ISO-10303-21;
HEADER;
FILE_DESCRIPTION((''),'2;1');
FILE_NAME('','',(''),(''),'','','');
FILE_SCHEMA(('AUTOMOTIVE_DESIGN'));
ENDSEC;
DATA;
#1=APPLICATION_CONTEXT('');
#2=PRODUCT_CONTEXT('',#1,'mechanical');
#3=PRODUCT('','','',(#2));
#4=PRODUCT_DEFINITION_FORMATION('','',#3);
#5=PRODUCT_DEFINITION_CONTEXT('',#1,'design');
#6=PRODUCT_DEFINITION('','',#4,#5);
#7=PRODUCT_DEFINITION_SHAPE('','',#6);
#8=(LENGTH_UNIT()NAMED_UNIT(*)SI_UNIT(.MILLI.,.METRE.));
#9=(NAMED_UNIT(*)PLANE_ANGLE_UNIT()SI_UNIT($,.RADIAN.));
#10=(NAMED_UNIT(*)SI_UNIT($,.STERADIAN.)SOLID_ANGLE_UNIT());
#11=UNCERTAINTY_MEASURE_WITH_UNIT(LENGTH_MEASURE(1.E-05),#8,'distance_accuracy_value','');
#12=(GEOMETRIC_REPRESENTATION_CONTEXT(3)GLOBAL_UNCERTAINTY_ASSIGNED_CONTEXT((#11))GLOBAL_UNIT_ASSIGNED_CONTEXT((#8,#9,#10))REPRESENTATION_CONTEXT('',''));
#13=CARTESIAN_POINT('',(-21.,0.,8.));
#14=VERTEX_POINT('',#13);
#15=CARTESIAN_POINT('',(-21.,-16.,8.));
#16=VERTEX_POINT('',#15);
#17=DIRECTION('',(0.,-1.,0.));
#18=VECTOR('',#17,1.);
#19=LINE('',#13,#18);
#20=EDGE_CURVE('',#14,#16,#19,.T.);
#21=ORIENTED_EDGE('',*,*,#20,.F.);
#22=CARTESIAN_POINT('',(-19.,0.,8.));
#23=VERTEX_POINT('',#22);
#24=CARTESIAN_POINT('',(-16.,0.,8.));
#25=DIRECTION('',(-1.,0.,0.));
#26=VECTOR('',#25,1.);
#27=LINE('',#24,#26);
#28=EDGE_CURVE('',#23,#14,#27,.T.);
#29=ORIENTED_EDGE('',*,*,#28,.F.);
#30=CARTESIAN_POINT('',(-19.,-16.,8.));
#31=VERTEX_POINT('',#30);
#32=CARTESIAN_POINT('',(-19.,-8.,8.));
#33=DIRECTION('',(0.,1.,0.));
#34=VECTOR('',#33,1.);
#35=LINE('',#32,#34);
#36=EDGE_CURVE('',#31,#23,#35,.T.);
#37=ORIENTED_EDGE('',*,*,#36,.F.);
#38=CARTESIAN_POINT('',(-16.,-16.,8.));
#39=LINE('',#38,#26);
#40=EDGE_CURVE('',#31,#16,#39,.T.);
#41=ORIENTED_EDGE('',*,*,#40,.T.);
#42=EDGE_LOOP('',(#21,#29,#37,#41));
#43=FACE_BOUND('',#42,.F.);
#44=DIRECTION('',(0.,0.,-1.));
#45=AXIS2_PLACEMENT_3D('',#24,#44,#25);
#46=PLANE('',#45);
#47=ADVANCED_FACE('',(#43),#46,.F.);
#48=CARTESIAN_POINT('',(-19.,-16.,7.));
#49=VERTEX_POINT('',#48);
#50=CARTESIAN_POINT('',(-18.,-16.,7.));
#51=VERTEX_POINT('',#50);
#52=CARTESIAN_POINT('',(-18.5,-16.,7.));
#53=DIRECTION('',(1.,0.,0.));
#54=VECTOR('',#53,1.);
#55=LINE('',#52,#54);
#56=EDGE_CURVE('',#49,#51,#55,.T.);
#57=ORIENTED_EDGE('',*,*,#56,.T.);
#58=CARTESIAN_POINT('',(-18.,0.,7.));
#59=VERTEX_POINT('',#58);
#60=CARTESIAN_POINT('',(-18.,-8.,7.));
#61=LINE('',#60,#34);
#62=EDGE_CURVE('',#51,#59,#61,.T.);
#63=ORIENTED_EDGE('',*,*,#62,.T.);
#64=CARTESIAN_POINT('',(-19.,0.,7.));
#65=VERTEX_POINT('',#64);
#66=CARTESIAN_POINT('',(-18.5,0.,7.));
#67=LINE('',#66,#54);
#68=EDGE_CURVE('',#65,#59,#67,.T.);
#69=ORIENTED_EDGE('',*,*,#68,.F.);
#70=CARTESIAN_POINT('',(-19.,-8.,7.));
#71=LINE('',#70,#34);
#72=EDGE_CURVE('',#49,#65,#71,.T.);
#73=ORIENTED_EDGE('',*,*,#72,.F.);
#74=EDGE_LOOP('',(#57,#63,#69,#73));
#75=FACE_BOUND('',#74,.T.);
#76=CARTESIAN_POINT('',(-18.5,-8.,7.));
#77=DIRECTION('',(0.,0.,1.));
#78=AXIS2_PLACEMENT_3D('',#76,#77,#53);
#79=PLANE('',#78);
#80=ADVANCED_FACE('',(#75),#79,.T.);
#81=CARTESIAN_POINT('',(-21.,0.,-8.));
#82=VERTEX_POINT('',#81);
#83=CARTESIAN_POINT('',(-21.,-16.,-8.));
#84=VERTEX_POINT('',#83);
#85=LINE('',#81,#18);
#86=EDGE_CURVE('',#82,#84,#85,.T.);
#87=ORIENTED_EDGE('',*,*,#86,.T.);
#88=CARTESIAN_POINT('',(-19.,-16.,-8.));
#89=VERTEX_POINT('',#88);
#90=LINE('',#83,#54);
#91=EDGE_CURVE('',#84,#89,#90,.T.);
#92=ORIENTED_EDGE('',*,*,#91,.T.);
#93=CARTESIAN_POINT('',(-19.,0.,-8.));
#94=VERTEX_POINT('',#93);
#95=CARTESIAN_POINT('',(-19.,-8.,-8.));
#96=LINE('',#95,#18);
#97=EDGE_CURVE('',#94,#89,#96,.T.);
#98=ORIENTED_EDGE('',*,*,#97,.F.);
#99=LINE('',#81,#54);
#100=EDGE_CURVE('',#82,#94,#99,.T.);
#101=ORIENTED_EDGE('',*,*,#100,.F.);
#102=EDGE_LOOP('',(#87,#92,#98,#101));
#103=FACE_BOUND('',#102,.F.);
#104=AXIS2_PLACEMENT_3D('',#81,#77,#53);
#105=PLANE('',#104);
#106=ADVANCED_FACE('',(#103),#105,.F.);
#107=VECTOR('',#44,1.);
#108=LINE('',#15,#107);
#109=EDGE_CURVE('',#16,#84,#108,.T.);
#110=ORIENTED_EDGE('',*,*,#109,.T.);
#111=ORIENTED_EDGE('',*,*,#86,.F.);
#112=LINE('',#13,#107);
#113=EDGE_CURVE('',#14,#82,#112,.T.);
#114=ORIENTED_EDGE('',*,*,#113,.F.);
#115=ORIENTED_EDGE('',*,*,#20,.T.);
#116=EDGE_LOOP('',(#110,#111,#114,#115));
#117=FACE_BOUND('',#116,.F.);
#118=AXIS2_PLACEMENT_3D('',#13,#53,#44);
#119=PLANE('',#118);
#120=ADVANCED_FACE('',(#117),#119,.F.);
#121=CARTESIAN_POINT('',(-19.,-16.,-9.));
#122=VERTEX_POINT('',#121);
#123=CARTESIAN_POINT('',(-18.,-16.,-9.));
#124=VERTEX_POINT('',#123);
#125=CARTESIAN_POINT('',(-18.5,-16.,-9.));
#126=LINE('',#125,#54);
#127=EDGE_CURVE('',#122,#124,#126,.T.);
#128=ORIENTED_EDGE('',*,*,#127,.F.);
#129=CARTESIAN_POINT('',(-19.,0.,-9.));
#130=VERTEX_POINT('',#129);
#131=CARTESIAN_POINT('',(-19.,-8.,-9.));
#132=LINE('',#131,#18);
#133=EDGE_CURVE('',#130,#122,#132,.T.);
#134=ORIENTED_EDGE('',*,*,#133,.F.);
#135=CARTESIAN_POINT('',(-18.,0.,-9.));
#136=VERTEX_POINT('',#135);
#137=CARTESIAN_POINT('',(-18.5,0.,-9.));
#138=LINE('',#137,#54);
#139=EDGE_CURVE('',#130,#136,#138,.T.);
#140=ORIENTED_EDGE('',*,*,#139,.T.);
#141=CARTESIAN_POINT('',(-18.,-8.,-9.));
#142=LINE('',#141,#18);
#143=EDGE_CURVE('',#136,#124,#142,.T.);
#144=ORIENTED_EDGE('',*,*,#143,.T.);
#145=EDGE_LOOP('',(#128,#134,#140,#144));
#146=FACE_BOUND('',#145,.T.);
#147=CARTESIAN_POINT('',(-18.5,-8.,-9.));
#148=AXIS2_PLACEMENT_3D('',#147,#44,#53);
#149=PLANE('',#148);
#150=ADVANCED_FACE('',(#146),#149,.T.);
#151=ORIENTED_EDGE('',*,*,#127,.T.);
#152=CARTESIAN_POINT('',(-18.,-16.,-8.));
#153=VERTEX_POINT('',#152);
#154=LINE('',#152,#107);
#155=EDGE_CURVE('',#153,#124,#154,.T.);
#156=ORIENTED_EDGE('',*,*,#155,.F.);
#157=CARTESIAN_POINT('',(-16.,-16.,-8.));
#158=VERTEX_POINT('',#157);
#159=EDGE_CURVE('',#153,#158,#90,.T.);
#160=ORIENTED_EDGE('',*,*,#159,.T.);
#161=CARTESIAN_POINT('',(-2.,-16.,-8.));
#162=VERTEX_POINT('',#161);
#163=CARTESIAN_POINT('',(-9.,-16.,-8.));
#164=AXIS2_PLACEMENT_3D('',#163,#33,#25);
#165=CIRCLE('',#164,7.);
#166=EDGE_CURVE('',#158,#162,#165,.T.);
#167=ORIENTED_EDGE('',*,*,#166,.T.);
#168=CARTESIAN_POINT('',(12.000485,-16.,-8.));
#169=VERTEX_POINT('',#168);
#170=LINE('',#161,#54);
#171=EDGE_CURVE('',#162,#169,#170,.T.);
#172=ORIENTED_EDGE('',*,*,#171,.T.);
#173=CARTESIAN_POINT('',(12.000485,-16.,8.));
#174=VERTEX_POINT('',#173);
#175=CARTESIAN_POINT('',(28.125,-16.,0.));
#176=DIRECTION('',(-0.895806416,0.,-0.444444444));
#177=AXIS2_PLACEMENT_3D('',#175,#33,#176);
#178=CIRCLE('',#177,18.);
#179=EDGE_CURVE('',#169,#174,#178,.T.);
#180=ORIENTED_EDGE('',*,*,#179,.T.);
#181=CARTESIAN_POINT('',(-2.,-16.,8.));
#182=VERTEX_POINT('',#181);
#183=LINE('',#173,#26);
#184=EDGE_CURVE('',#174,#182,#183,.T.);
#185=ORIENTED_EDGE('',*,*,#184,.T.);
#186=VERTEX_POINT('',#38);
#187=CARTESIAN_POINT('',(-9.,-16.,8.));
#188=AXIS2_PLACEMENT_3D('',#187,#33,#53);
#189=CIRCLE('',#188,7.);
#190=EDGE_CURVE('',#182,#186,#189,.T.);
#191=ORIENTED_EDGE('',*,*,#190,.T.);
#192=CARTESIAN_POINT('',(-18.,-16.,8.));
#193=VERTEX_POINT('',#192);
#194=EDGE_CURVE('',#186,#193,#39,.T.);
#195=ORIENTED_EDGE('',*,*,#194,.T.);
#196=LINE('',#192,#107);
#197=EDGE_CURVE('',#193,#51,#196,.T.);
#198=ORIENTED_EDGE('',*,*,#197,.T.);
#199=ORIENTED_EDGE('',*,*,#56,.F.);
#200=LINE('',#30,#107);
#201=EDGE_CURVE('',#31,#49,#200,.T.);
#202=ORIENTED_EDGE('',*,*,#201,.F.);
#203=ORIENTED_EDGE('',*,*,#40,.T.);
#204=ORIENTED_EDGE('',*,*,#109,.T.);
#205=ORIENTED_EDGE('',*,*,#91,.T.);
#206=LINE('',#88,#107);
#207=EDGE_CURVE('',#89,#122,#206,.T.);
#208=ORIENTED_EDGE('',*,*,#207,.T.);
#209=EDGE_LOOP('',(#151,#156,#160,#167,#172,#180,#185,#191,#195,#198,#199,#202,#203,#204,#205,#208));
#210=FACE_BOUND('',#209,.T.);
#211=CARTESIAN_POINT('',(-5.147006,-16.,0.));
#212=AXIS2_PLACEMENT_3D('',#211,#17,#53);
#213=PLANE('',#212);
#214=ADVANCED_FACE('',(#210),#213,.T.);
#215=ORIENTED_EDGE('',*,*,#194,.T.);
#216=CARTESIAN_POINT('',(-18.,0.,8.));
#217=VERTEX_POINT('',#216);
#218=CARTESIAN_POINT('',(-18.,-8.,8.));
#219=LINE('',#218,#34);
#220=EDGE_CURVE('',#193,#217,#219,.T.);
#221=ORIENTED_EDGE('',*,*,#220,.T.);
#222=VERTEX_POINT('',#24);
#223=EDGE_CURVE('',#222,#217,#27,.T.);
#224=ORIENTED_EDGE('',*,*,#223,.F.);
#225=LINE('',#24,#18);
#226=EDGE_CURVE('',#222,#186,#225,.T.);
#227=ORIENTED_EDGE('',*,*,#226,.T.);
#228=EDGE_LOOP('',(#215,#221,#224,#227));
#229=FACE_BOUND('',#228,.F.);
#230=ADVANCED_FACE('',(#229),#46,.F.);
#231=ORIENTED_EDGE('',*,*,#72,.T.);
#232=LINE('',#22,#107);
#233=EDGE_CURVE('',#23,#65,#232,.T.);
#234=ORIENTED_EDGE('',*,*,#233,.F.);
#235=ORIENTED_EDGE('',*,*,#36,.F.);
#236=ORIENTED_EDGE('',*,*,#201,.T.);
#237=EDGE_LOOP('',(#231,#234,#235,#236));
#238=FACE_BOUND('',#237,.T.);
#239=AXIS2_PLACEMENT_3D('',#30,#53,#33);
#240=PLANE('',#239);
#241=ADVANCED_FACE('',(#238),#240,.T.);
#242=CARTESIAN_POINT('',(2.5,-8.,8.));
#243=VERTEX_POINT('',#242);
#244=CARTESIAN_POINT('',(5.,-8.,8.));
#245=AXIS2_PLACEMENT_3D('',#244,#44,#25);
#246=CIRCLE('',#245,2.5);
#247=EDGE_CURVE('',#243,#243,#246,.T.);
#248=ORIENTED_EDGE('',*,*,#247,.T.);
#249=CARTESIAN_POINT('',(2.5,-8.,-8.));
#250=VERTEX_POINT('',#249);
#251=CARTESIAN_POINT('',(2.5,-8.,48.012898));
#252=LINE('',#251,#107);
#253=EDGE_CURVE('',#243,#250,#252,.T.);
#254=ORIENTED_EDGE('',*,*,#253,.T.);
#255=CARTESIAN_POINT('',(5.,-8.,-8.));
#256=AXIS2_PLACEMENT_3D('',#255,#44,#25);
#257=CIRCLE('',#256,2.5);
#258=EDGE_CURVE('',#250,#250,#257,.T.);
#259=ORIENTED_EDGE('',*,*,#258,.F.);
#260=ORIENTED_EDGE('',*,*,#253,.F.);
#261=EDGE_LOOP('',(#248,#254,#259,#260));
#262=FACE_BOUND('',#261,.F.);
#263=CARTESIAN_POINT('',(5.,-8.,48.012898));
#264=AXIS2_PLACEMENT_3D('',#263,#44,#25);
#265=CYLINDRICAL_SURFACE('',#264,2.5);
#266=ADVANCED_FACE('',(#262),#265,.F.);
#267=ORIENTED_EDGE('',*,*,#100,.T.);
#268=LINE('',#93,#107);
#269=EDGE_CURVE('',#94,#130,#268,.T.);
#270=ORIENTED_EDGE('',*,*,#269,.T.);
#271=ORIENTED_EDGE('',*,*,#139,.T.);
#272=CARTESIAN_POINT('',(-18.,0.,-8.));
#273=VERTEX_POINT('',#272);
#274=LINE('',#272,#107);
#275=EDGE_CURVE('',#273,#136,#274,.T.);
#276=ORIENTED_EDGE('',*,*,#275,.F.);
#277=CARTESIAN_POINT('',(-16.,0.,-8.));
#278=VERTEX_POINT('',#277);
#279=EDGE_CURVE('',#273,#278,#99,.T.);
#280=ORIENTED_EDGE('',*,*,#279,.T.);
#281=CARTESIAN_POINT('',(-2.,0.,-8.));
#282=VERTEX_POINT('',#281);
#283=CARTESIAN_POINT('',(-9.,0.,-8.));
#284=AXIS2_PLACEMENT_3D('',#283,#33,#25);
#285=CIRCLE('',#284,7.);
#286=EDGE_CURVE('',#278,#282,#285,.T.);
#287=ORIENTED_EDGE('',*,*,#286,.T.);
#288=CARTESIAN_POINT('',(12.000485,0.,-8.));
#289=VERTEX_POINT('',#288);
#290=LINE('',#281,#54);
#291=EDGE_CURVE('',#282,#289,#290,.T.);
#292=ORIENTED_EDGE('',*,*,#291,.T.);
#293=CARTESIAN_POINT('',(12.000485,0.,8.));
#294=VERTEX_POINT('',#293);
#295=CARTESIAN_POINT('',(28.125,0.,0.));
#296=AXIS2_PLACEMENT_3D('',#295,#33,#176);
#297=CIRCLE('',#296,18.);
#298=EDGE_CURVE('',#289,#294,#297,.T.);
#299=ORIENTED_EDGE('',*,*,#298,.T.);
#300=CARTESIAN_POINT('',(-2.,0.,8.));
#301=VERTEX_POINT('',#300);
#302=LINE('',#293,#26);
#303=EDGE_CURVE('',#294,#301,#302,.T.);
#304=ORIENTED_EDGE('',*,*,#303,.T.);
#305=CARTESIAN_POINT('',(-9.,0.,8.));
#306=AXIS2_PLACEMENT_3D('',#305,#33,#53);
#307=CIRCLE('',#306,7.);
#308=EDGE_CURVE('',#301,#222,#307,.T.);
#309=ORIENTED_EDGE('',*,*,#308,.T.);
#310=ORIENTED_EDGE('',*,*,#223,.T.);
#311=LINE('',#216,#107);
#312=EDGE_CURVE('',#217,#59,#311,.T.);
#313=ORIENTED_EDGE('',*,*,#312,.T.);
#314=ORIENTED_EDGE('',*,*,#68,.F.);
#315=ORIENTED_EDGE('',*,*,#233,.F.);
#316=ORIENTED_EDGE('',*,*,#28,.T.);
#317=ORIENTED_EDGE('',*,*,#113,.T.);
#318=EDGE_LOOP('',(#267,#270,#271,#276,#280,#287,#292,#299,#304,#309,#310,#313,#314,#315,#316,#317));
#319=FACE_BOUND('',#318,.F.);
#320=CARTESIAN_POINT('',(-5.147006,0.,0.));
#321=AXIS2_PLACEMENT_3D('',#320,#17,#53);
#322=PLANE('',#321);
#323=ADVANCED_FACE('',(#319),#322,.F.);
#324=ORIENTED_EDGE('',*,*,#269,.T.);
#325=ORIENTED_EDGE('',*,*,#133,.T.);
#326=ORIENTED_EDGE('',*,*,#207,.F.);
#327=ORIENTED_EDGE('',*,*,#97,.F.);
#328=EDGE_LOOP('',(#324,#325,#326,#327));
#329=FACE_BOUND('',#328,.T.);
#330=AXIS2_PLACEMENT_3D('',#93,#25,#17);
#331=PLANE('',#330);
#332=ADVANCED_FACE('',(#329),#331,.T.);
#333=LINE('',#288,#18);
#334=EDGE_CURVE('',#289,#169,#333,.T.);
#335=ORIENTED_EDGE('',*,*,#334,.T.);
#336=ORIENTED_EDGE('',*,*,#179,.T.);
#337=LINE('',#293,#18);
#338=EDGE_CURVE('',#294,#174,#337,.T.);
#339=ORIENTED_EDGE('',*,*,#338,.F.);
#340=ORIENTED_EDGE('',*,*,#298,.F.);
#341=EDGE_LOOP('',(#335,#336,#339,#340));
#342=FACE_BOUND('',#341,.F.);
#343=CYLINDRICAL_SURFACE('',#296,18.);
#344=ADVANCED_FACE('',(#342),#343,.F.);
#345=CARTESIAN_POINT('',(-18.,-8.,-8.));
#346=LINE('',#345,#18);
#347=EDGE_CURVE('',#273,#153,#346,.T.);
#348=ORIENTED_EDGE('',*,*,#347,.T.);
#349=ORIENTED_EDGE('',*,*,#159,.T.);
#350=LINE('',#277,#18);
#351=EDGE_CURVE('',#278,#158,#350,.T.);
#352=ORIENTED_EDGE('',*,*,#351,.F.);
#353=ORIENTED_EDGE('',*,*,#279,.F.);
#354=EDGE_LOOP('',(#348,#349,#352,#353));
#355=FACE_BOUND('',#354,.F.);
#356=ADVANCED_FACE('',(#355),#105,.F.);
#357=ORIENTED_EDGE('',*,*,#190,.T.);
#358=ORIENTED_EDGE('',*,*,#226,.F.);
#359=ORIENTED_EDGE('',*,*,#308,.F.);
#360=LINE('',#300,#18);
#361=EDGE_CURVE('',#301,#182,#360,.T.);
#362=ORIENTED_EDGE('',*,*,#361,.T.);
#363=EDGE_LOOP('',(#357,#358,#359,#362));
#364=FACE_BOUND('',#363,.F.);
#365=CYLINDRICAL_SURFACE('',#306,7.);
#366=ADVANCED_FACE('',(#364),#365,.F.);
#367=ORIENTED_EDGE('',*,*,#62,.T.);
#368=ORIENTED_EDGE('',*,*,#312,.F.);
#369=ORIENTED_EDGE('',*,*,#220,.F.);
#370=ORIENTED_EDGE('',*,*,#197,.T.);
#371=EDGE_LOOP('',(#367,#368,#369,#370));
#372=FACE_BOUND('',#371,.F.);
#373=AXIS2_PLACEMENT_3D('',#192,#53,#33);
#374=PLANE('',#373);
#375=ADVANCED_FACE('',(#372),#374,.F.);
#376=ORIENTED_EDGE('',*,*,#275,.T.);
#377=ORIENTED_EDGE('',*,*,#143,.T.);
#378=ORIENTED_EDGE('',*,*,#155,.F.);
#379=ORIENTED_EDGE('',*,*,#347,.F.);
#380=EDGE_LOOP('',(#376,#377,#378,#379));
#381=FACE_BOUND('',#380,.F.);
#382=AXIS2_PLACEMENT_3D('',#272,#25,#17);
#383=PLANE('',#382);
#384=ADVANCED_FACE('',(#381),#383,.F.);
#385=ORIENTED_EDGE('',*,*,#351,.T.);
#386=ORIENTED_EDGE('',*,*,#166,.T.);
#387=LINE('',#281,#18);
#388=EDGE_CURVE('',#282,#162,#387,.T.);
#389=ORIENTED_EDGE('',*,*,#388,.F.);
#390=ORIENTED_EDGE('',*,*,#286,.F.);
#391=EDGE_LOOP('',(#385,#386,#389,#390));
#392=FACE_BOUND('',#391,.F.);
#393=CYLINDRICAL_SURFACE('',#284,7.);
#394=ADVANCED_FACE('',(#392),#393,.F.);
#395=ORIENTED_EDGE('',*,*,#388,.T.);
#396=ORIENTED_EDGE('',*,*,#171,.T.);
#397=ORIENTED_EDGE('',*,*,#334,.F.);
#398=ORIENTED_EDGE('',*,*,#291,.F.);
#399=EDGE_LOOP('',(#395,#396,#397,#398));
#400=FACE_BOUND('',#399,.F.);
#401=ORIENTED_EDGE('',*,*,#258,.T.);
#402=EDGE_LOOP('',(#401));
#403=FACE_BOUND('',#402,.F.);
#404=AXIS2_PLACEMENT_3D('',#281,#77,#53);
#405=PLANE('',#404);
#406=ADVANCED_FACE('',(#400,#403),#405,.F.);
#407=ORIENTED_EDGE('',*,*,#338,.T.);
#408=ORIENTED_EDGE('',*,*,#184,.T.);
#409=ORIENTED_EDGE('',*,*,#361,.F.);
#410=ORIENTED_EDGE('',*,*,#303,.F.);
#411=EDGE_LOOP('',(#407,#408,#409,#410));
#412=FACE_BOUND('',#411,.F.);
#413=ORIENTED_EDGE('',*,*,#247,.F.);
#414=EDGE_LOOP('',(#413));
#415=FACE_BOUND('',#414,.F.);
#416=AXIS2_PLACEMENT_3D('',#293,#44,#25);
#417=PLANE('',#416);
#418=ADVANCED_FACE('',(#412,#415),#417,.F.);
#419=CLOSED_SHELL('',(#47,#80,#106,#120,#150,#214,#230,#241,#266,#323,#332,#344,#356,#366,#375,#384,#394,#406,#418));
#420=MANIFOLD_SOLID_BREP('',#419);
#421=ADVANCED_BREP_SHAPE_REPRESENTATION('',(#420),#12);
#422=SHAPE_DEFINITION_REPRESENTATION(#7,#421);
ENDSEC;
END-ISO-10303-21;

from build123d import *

# Parameters (mm, degrees)
F1_DEPTH = 16
F3_D     = 5
F4_W     = 1
F4_H     = 16
F5_DEPTH = 1
F6_W     = 1
F6_H     = 16
F7_DEPTH = 1


# Not quite as in the source:
# - a feature names something its author has since deleted; it is built from what else it names


with BuildPart() as f1:
    # F0 (on Front) → F1 (new body)
    with BuildSketch(Plane.XZ):
        with BuildLine():
            Line((-21, 8), (-21, -8))
            Line((-21, -8), (-16, -8))
            ThreePointArc((-16, -8), (-9, -1), (-2, -8))
            Line((-2, -8), (12.0004845034, -8))
            ThreePointArc((12.0004845034, -8), (10.125, 0), (12.0004845034, 8))
            Line((12.0004845034, 8), (-2, 8))
            ThreePointArc((-2, 8), (-9, 1), (-16, 8))
            Line((-16, 8), (-21, 8))
        make_face()
    extrude(amount=F1_DEPTH)

    # F3 (through all)
    with Locations(Plane.XY.offset(8)):
        with Locations((5, -8)):
            Hole(F3_D / 2)

    # F4 (on face) → F5 (cut)
    with BuildSketch(Plane.XY.offset(8)):
        with Locations((-18.5, -8)):
            Rectangle(F4_W, F4_H)
    extrude(amount=-F5_DEPTH, mode=Mode.SUBTRACT)

    # F6 (on face) → F7 (join)
    with BuildSketch(Plane(origin=(0, 0, -8), x_dir=(1, 0, 0), z_dir=(0, 0, -1))):
        with Locations((-18.5, 8)):
            Rectangle(F6_W, F6_H)
    extrude(amount=F7_DEPTH)


solid = f1.part
